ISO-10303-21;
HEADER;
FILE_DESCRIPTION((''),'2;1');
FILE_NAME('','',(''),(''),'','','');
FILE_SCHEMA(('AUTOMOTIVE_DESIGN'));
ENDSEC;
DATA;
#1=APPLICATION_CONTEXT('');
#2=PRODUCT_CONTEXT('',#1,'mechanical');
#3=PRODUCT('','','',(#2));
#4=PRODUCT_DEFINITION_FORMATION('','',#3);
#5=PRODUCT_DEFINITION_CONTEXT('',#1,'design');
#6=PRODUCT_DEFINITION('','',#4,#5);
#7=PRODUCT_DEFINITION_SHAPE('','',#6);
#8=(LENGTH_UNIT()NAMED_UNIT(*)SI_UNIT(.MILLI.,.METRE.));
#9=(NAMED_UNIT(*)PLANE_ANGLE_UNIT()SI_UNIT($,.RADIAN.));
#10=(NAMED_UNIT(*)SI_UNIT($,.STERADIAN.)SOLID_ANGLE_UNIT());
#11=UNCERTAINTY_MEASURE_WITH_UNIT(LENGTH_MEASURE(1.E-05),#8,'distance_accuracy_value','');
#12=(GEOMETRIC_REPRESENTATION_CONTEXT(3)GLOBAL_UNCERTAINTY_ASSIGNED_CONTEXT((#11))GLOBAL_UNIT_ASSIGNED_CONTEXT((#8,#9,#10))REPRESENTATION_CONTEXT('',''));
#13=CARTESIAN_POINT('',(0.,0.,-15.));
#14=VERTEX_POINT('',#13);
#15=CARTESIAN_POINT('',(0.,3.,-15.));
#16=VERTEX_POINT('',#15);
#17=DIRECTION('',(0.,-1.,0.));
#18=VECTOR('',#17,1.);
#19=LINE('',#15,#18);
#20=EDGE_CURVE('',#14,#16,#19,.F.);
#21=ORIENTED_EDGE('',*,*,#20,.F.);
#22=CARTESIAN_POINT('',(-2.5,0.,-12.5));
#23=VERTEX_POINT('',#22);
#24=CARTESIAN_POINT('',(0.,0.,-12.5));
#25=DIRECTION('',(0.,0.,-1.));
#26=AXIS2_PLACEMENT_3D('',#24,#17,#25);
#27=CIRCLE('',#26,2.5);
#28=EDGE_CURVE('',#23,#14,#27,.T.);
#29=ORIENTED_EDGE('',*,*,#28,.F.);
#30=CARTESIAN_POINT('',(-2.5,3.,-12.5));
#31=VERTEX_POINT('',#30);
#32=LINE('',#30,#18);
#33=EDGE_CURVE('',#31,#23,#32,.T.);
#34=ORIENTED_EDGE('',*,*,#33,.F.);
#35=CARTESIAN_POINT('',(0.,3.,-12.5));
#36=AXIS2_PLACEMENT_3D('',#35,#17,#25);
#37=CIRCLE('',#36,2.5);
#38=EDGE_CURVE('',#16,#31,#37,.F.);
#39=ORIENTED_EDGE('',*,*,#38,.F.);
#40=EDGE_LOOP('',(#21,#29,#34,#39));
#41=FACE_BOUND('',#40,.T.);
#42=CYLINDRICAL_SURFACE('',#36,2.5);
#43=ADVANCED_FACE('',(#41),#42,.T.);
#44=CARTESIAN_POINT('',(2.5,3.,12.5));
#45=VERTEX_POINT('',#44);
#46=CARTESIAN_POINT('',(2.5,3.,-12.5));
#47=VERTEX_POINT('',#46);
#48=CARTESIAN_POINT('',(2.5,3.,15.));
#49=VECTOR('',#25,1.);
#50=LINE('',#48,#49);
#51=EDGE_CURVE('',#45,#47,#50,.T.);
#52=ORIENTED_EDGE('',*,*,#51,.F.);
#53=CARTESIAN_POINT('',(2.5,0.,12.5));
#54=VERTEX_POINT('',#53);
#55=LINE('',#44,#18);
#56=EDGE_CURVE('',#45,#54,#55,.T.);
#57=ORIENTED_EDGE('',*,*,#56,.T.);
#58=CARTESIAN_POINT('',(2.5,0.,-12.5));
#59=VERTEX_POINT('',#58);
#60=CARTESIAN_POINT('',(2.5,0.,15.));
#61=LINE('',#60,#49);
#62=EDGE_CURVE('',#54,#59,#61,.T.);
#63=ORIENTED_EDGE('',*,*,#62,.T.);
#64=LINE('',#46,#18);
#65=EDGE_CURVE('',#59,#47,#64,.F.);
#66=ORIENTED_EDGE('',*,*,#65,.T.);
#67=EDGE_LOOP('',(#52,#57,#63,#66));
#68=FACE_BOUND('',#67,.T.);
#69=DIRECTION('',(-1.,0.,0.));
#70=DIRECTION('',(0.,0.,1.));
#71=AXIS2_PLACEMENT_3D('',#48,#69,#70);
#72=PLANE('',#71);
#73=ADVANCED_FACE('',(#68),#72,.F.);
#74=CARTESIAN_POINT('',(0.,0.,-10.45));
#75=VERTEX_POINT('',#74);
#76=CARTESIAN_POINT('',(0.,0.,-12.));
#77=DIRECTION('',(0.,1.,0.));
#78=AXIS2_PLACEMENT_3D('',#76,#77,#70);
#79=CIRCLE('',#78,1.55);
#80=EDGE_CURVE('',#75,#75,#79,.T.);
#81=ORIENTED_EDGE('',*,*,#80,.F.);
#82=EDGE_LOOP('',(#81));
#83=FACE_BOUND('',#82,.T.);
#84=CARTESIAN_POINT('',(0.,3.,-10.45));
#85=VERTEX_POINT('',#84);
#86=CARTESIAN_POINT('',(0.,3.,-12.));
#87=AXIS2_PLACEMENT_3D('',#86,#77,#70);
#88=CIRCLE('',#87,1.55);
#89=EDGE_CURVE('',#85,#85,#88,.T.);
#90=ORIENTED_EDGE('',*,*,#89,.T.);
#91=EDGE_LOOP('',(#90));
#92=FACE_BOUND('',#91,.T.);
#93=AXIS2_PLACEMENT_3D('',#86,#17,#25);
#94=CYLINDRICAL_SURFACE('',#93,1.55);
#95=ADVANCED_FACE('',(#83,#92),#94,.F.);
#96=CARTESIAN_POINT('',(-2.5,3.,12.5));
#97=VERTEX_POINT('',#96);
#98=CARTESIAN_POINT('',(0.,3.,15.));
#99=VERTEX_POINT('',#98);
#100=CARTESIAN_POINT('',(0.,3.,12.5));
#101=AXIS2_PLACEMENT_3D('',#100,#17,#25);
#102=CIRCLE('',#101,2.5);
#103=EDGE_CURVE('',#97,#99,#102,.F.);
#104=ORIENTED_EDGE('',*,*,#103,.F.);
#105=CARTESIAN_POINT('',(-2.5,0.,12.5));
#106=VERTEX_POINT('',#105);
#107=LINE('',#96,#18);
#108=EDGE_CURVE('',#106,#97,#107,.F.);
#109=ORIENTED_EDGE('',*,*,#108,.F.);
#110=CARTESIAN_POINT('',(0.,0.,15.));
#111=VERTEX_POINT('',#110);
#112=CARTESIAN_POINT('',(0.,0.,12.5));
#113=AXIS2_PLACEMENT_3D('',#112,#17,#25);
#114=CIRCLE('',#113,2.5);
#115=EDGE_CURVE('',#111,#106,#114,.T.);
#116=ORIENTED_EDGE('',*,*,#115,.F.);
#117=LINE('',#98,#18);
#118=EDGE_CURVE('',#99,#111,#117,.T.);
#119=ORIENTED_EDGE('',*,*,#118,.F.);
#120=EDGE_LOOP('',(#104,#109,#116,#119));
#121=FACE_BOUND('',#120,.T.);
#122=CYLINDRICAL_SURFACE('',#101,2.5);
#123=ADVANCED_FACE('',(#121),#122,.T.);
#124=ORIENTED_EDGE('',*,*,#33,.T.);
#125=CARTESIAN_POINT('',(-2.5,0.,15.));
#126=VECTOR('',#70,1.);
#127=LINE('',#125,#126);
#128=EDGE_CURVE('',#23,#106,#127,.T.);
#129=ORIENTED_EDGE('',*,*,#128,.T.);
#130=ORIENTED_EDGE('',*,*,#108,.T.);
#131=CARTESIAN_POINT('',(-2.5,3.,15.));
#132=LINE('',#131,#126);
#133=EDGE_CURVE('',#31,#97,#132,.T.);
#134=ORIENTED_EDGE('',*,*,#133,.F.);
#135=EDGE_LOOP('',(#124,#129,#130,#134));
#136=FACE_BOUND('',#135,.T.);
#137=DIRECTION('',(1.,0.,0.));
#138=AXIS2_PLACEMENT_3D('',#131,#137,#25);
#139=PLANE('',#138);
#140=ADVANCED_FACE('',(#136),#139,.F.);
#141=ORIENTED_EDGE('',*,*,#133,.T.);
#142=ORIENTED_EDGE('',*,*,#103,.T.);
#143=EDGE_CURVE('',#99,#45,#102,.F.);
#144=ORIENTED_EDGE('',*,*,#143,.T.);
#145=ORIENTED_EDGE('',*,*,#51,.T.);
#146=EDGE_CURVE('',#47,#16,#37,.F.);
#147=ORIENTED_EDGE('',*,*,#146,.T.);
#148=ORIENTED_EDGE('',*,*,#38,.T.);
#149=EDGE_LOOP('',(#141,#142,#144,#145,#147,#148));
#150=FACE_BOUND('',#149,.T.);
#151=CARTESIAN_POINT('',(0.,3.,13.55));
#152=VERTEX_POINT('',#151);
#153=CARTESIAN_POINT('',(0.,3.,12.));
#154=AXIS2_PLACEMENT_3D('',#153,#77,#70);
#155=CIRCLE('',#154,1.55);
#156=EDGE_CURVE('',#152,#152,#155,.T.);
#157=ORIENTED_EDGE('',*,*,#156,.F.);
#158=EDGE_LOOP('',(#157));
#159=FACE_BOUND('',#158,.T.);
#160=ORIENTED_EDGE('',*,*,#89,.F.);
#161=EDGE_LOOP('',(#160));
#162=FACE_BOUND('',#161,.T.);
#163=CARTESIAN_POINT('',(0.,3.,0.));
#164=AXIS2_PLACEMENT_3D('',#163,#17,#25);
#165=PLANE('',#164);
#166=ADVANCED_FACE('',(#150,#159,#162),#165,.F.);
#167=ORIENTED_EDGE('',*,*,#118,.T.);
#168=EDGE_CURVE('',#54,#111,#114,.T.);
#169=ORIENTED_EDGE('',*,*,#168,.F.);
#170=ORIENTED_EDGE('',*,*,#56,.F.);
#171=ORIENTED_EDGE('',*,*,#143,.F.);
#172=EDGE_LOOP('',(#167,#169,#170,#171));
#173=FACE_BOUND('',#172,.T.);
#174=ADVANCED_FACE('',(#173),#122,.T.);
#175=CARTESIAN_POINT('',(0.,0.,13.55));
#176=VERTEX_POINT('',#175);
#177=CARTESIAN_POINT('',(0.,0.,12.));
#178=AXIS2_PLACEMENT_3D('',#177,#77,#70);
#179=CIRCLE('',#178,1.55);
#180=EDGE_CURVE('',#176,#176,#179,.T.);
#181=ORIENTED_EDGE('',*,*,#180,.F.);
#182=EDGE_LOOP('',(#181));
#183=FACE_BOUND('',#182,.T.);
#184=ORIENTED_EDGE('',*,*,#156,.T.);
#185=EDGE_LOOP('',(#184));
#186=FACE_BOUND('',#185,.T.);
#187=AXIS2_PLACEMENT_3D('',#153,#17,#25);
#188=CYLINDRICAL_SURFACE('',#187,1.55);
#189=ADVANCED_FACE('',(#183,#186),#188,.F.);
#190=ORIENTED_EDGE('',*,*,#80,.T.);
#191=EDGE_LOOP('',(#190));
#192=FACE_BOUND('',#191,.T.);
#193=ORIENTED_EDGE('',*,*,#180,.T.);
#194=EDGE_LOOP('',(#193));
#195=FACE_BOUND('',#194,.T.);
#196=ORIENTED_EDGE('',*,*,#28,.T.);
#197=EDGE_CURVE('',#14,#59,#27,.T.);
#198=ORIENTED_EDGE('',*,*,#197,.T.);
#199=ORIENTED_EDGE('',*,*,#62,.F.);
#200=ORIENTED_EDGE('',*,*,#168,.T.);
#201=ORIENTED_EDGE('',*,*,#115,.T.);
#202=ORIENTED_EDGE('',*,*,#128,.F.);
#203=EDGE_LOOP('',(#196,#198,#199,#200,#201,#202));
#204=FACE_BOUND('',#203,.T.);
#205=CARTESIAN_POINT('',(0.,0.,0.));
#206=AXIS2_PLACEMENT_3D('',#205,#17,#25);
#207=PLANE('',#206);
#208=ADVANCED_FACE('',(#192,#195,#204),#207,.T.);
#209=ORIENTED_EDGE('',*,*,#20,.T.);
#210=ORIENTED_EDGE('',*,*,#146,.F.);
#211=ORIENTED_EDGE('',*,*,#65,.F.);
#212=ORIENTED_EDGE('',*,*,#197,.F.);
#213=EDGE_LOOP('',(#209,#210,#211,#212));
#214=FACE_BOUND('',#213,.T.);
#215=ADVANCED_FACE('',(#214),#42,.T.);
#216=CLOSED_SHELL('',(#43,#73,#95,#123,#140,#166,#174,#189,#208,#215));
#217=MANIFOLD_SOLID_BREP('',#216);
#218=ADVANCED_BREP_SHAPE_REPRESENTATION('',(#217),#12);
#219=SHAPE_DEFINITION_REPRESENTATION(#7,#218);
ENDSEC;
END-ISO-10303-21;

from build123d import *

# Parameters (mm, degrees)
SKETCH1_W           = 5
SKETCH1_H           = 30
SKETCH1_R           = 1.55
BOSS_EXTRUDE1_DEPTH = 3
FILLET1_R           = 2.5


with BuildPart() as part:
    # Sketch1 → Boss-Extrude1 (new body)
    with BuildSketch(Plane(origin=(0, 0, 0), x_dir=(1, 0, 0), z_dir=(0, 1, 0))):
        Rectangle(SKETCH1_W, SKETCH1_H)
        with Locations(Location((0, 12, 0), (0, 0, 270))):
            Circle(SKETCH1_R, mode=Mode.SUBTRACT)
        with Locations(Location((0, -12, 0), (0, 0, 270))):
            Circle(SKETCH1_R, mode=Mode.SUBTRACT)
    extrude(amount=BOSS_EXTRUDE1_DEPTH)

    # Fillet1
    fillet1_edges = [part.edges().sort_by_distance(p)[0] for p in [
        (-2.5, 1.5, 15),
        (-2.5, 1.5, -15),
        (2.5, 1.5, -15),
        (2.5, 1.5, 15),
    ]]
    fillet(fillet1_edges, radius=FILLET1_R - 0.0001)  # a hair under: the kernel refuses the full size


solid = part.part
